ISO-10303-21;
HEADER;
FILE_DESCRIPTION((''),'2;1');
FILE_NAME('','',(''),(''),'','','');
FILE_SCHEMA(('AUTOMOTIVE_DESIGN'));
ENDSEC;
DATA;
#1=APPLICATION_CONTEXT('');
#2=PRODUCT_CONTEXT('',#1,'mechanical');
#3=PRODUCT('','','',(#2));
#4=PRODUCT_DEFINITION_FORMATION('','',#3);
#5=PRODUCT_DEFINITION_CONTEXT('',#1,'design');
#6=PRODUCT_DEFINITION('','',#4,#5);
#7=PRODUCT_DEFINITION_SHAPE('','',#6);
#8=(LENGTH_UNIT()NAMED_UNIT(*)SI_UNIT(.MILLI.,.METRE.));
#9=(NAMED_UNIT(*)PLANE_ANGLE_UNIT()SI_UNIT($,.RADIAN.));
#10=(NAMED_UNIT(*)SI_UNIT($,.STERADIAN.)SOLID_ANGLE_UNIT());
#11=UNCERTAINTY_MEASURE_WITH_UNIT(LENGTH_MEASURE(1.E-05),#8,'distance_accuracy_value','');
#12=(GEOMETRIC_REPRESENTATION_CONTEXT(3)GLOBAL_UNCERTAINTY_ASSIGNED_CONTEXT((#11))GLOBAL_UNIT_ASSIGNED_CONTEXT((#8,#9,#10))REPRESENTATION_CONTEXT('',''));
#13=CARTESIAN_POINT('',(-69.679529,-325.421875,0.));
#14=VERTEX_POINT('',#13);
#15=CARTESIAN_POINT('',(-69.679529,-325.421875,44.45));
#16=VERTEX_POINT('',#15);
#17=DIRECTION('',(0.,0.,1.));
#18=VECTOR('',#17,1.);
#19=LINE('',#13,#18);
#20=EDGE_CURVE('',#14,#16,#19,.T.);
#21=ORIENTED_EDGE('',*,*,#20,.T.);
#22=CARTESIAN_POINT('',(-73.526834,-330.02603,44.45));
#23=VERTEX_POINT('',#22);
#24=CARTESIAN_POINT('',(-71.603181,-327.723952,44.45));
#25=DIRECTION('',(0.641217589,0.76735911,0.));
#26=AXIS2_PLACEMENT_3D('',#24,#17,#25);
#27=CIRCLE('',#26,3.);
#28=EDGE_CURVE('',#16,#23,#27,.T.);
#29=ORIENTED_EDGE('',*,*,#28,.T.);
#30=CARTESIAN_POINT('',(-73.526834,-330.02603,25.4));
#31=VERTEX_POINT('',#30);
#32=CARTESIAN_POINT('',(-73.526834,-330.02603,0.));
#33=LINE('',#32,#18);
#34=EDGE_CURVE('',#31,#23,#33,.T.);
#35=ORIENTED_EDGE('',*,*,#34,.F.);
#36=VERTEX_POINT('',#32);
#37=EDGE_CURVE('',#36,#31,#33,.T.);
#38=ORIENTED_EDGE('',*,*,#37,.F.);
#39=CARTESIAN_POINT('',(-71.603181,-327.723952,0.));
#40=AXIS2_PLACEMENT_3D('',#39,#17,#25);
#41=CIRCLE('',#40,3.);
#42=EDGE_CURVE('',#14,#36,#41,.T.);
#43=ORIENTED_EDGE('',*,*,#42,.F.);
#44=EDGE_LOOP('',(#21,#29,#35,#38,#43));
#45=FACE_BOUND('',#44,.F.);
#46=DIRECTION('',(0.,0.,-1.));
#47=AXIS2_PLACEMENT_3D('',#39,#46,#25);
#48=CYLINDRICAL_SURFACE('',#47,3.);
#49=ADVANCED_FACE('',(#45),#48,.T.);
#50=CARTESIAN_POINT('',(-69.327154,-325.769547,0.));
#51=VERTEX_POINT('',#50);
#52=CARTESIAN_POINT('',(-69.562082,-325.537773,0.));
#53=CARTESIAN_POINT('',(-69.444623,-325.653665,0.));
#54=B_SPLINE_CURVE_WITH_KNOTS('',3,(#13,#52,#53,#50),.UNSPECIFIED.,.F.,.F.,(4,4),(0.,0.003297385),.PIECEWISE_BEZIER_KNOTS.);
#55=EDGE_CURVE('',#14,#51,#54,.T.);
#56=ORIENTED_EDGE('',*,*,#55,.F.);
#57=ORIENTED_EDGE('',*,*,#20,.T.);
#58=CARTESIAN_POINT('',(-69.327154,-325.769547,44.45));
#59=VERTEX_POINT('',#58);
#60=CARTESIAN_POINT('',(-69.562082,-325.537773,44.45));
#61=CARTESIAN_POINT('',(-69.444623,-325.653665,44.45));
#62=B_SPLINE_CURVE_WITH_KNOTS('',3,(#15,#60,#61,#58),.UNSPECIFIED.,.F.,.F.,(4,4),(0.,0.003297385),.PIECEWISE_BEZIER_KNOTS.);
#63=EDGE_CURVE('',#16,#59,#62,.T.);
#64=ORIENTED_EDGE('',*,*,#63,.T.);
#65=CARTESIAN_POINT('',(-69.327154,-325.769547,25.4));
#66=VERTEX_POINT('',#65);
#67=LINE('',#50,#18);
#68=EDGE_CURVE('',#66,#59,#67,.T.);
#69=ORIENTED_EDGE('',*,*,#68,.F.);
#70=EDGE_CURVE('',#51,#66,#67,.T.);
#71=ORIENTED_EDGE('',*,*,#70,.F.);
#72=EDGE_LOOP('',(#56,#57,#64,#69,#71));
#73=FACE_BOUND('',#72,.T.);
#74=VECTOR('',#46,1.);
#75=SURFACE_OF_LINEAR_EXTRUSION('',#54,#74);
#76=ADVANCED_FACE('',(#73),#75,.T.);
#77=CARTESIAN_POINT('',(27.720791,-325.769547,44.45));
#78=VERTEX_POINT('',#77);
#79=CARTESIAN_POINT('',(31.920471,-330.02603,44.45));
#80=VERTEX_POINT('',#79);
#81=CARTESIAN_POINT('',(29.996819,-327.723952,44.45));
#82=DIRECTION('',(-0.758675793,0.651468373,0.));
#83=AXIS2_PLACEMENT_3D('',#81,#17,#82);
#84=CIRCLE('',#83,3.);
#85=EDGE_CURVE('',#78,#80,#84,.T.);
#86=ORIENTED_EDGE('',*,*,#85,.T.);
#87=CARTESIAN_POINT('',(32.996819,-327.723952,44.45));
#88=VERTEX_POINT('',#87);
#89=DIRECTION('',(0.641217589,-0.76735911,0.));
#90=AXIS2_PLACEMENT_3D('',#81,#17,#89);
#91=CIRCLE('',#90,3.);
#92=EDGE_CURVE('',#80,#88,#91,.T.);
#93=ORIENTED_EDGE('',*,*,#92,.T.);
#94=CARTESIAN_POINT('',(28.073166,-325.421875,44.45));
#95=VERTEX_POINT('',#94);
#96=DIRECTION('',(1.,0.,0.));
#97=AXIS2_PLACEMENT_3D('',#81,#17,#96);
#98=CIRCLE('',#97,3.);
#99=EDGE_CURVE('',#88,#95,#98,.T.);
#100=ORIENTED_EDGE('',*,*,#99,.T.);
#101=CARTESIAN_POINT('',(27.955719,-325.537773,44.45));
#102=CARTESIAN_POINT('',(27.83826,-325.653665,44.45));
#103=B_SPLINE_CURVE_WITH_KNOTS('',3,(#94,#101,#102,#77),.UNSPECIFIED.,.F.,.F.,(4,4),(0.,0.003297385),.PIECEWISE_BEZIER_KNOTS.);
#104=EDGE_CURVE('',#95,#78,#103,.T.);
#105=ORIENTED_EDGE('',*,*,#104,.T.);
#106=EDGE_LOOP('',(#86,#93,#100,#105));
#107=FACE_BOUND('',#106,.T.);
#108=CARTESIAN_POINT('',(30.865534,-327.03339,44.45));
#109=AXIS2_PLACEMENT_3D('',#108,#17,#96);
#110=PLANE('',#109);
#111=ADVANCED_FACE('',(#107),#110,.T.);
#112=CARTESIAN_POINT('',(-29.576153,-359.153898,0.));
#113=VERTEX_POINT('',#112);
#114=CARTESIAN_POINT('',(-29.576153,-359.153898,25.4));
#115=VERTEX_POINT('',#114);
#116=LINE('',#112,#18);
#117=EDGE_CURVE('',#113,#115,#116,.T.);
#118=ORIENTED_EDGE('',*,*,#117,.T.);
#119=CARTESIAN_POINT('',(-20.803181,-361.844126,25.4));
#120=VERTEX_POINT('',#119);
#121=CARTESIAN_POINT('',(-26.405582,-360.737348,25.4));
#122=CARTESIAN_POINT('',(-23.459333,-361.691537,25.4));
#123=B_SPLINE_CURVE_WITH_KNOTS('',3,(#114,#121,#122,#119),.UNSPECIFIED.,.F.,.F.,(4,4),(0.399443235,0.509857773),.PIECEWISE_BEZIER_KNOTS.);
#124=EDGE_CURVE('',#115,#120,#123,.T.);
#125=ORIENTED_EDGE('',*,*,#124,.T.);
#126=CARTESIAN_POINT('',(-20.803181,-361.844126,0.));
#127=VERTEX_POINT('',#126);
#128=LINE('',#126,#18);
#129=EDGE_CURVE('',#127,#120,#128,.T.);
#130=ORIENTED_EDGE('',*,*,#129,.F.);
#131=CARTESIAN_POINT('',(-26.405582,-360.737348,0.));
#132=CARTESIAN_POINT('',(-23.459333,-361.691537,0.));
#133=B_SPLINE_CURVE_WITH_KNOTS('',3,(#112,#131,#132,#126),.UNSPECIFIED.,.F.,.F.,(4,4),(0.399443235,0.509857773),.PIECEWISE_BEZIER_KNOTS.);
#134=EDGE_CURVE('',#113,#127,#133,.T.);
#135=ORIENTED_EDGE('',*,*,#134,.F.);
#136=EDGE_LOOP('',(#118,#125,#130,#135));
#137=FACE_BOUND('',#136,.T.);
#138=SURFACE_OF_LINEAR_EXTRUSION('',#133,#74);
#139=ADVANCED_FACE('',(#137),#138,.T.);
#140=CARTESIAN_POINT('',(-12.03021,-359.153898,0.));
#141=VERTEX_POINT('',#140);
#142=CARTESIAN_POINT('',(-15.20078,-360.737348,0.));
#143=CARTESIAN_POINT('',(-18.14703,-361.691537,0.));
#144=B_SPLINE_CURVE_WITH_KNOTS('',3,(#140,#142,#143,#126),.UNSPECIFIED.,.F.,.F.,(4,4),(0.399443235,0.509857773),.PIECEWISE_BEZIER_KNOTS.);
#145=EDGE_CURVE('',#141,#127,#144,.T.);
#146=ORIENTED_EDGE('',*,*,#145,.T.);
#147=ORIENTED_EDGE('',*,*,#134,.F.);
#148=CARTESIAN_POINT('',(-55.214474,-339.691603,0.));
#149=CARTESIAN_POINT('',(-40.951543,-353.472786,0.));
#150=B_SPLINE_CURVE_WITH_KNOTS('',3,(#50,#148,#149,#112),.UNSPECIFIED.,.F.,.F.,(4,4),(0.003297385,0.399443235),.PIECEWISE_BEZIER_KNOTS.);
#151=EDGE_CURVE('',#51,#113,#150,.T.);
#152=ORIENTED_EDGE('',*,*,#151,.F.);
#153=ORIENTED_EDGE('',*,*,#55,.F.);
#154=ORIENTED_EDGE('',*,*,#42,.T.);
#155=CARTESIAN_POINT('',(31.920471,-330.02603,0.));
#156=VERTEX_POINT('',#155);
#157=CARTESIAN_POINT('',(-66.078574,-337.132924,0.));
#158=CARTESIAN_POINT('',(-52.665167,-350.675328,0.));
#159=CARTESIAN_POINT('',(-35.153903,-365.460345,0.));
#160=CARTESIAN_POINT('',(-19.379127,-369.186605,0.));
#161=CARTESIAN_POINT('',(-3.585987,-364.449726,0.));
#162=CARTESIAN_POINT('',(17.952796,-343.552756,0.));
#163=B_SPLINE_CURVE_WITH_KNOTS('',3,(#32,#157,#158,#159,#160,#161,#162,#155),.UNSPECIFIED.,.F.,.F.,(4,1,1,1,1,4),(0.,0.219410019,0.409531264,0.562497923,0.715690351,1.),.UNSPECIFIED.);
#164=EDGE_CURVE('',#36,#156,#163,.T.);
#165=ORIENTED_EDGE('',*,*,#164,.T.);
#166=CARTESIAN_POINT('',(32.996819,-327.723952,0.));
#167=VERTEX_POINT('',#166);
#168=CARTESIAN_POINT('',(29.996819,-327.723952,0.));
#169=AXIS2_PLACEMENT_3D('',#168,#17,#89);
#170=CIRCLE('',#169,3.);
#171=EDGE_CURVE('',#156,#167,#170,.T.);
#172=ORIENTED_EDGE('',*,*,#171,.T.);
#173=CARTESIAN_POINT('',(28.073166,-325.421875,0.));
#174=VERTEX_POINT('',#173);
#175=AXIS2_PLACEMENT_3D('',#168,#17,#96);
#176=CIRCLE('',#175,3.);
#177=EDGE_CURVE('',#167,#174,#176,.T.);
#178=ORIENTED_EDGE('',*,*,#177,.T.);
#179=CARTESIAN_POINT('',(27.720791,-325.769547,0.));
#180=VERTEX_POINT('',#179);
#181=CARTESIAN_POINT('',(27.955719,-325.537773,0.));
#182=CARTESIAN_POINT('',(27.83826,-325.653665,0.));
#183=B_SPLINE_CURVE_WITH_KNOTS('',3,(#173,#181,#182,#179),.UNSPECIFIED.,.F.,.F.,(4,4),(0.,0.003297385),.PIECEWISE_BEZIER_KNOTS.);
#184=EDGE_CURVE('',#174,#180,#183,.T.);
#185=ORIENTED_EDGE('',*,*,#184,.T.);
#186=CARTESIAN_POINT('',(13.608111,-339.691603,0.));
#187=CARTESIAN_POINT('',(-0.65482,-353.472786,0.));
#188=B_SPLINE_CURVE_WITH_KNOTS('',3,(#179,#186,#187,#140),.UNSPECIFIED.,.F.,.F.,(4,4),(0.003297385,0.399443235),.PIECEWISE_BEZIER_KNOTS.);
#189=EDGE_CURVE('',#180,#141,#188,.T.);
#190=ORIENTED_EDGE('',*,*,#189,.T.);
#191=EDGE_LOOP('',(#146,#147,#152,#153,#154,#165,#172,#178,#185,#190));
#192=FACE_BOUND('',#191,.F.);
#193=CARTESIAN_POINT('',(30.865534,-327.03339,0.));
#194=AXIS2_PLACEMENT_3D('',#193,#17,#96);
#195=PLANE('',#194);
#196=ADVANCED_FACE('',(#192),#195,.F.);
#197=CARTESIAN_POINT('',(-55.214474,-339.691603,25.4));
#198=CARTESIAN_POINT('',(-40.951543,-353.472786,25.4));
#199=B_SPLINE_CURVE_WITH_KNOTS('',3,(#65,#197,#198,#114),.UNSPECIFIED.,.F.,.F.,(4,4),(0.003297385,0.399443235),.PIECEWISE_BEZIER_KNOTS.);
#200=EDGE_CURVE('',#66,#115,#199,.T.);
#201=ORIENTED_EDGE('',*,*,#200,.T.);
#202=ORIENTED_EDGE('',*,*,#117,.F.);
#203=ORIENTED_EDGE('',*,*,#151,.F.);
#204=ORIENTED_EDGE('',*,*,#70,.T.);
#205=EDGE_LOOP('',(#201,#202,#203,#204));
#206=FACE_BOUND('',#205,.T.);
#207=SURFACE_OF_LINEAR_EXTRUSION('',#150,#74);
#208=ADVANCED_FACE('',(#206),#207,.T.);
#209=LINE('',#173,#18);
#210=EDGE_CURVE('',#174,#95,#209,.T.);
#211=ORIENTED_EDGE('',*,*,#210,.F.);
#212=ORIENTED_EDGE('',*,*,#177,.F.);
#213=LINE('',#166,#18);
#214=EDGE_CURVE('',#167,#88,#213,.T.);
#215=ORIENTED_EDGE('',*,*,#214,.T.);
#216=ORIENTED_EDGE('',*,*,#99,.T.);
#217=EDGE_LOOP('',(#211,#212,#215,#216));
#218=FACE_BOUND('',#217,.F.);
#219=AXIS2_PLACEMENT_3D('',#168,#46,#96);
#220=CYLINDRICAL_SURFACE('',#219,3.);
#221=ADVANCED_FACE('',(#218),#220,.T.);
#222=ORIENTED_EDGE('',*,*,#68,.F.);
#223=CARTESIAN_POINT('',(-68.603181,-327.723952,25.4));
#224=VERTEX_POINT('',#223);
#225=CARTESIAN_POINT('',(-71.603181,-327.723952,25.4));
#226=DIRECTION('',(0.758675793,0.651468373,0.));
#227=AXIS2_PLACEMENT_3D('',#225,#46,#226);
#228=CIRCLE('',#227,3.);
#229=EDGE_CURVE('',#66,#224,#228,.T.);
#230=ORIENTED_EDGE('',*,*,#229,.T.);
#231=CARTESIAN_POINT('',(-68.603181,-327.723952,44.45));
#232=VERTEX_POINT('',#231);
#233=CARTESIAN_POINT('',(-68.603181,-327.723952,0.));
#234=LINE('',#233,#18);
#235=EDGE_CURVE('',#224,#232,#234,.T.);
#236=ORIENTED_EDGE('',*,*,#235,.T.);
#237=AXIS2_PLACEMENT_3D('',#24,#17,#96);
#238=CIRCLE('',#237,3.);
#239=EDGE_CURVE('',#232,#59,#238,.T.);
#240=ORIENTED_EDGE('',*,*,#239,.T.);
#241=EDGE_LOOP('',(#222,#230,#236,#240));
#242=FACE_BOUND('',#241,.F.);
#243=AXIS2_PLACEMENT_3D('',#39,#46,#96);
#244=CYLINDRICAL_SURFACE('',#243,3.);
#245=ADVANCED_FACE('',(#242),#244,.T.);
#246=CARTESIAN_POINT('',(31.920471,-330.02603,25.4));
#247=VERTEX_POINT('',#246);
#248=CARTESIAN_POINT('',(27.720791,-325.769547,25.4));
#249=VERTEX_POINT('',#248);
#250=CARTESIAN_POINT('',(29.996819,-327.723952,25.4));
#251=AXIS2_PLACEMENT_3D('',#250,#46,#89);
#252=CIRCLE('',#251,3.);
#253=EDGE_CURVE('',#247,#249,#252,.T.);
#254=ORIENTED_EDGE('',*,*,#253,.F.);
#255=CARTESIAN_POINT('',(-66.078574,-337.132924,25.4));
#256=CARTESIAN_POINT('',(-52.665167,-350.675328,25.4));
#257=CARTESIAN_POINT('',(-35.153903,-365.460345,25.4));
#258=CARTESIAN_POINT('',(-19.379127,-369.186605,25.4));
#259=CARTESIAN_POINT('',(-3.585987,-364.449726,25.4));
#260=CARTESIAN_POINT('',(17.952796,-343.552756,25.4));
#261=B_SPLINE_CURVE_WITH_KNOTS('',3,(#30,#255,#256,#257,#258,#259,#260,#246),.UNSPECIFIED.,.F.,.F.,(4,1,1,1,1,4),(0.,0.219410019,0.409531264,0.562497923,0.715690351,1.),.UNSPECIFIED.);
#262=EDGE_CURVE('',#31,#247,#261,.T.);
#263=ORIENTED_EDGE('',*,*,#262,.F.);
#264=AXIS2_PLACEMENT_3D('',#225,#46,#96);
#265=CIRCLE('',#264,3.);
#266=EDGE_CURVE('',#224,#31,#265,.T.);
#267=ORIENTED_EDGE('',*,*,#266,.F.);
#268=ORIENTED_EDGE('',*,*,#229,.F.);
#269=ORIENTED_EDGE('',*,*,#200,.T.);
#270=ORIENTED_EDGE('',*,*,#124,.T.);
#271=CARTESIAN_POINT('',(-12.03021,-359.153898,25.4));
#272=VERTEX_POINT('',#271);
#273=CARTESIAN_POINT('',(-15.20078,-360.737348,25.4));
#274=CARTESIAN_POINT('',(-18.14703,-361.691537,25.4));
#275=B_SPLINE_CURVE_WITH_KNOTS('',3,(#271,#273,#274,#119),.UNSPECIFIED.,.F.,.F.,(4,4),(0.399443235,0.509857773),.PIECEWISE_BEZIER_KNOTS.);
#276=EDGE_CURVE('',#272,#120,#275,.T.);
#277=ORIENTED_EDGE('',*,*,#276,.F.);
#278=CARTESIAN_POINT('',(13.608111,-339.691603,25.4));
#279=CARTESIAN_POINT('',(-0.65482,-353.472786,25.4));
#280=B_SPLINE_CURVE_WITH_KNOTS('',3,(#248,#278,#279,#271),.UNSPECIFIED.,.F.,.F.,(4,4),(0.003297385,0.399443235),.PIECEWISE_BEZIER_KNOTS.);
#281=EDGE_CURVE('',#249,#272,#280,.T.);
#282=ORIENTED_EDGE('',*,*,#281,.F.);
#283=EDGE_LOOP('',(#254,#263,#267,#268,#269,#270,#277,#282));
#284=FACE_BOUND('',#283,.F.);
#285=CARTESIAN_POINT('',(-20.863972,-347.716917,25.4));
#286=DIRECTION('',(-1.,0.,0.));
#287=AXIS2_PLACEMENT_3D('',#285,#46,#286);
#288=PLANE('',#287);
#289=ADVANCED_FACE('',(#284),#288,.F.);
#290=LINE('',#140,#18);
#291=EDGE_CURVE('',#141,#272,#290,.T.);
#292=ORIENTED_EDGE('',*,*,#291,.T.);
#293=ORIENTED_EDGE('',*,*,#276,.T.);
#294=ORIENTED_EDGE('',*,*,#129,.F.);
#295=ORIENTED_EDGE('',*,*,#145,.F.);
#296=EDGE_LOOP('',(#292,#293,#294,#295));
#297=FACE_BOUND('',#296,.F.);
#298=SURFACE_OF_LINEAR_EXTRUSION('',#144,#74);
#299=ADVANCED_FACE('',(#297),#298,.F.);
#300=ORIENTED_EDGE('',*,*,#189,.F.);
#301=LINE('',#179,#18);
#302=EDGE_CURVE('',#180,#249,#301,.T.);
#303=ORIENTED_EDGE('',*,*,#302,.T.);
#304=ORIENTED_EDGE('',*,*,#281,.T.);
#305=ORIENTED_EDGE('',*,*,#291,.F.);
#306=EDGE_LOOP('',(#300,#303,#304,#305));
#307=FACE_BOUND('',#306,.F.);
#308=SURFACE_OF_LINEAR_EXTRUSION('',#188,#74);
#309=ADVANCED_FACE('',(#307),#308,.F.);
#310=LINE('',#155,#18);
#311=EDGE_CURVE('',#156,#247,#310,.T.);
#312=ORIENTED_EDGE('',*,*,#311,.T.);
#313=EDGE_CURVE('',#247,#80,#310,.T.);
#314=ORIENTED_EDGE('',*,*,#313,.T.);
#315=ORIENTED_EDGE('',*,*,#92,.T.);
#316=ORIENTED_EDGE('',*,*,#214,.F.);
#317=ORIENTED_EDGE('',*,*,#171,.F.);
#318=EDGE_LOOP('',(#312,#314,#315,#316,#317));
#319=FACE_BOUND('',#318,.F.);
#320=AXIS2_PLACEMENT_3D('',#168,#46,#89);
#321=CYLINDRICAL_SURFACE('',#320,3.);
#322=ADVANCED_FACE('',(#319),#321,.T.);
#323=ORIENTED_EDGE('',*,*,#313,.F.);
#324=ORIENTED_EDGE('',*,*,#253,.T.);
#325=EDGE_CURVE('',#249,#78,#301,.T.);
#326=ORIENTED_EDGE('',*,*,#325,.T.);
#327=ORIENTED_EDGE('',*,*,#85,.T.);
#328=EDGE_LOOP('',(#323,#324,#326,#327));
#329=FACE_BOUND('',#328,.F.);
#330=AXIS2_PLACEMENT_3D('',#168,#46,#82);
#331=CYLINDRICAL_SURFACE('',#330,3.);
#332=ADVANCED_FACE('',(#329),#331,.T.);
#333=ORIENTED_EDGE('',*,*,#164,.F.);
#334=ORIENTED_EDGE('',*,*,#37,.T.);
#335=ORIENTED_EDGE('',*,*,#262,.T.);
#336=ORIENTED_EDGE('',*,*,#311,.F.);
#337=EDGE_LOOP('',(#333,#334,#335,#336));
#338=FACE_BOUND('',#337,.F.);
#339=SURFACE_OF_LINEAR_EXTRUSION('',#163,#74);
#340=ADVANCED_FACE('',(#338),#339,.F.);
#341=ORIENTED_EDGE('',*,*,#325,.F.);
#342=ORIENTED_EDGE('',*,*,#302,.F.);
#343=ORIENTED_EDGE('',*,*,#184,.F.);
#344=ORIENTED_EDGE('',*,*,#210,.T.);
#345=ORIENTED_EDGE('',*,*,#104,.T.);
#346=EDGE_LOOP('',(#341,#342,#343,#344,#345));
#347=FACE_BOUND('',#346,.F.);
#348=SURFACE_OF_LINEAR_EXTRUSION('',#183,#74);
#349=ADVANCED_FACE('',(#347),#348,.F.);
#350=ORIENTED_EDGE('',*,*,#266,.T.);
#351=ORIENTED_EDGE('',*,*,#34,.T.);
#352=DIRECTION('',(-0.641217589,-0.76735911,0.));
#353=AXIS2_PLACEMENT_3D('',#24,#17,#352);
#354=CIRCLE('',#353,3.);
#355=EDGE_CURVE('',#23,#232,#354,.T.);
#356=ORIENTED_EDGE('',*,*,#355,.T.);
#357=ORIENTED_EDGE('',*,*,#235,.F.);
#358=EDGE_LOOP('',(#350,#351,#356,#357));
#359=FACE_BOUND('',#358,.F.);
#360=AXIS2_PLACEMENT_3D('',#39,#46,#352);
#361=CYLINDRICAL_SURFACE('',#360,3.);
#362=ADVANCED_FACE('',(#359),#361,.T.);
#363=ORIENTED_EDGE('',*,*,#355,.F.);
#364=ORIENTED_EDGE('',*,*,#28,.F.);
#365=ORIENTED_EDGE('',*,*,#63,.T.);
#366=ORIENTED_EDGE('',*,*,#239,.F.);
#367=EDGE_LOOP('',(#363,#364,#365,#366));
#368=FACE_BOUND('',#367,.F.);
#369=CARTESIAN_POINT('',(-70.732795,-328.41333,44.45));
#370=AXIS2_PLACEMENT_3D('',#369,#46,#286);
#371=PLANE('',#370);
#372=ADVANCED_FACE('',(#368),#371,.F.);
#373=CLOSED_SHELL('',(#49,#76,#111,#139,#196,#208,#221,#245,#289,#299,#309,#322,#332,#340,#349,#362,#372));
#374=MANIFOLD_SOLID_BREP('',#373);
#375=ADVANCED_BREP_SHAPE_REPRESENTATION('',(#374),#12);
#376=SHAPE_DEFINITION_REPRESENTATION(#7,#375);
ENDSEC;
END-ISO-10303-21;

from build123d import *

# Parameters (mm, degrees)
F1_DEPTH = 25.4
F2_DEPTH = 44.45


with BuildPart() as f1:
    # F0 (on Top) → F1 (new body)
    with BuildSketch(Plane.XY):
        with BuildLine():
            add(Edge.make_bspline(
                [(-69.3271539599, -325.7695472874), (-55.2144738249, -339.6916032797), (-40.9515430368, -353.4727855932), (-29.5761530725, -359.1538975577)],
                knots=[0.0032973847, 0.0032973847, 0.0032973847, 0.0032973847, 0.3994432353, 0.3994432353, 0.3994432353, 0.3994432353], degree=3))
            ThreePointArc((-69.3271539599, -325.7695472874), (-68.78999079, -326.6818588732), (-68.6031813399, -327.7239524054))
            ThreePointArc((-68.6031813399, -327.7239524054), (-70.3325433699, -330.4415762111), (-73.526834106, -330.0260297359))
            add(Edge.make_bspline(
                [(-73.526834106, -330.0260297359), (-66.0785739485, -337.1329239072), (-52.6651672252, -350.675327591), (-35.1539032994, -365.4603452904), (-19.3791270617, -369.1866054653), (-3.5859872539, -364.4497262422), (17.9527958908, -343.5527557441), (31.9204714261, -330.0260297359)],
                knots=[0, 0, 0, 0, 0.2194100194, 0.4095312642, 0.5624979229, 0.7156903508, 1, 1, 1, 1], degree=3))
            ThreePointArc((31.9204714261, -330.0260297359), (27.8612970199, -329.8309757381), (27.72079128, -325.7695472874))
            add(Edge.make_bspline(
                [(27.72079128, -325.7695472874), (13.608111145, -339.6916032798), (-0.6548196431, -353.4727855932), (-12.0302096074, -359.1538975577)],
                knots=[0.0032973847, 0.0032973847, 0.0032973847, 0.0032973847, 0.3994432353, 0.3994432353, 0.3994432353, 0.3994432353], degree=3))
            add(Edge.make_bspline(
                [(-20.8031813399, -361.8441262888), (-20.6461461246, -361.8531475586), (-17.281131215, -361.9872858015), (-14.3941104944, -360.8015328656), (-12.0302096074, -359.1538975577)],
                knots=[0.5098577732, 0.5098577732, 0.5098577732, 0.5098577732, 0.5163856275, 0.6506484057, 0.6506484057, 0.6506484057, 0.6506484057], degree=3))
            add(Edge.make_bspline(
                [(-20.8031813399, -361.8441262888), (-20.9602165553, -361.8531475586), (-24.3252314649, -361.9872858015), (-27.2122521855, -360.8015328656), (-29.5761530725, -359.1538975577)],
                knots=[0.5098577732, 0.5098577732, 0.5098577732, 0.5098577732, 0.5163856275, 0.6506484057, 0.6506484057, 0.6506484057, 0.6506484057], degree=3))
        make_face()
        with BuildLine():
            add(Edge.make_bspline(
                [(-29.5761530725, -359.1538975577), (-26.4055823726, -360.7373480762), (-23.4593329293, -361.6915372024), (-20.8031813399, -361.8441262888)],
                knots=[0.3994432353, 0.3994432353, 0.3994432353, 0.3994432353, 0.5098577732, 0.5098577732, 0.5098577732, 0.5098577732], degree=3))
            add(Edge.make_bspline(
                [(-20.8031813399, -361.8441262888), (-20.9602165553, -361.8531475586), (-24.3252314649, -361.9872858015), (-27.2122521855, -360.8015328656), (-29.5761530725, -359.1538975577)],
                knots=[0.5098577732, 0.5098577732, 0.5098577732, 0.5098577732, 0.5163856275, 0.6506484057, 0.6506484057, 0.6506484057, 0.6506484057], degree=3))
        make_face()
        with BuildLine():
            add(Edge.make_bspline(
                [(-12.0302096074, -359.1538975577), (-15.2007803073, -360.7373480762), (-18.1470297506, -361.6915372024), (-20.8031813399, -361.8441262888)],
                knots=[0.3994432353, 0.3994432353, 0.3994432353, 0.3994432353, 0.5098577732, 0.5098577732, 0.5098577732, 0.5098577732], degree=3))
            add(Edge.make_bspline(
                [(-20.8031813399, -361.8441262888), (-20.6461461246, -361.8531475586), (-17.281131215, -361.9872858015), (-14.3941104944, -360.8015328656), (-12.0302096074, -359.1538975577)],
                knots=[0.5098577732, 0.5098577732, 0.5098577732, 0.5098577732, 0.5163856275, 0.6506484057, 0.6506484057, 0.6506484057, 0.6506484057], degree=3))
        make_face()
    extrude(amount=F1_DEPTH)

    # F0 (on Top) → F2 (join)
    with BuildSketch(Plane.XY):
        with BuildLine():
            Line((28.073165894, -325.4218750749), (31.9204714261, -330.0260297359))
            ThreePointArc((31.9204714261, -330.0260297359), (32.7144424657, -328.9945903755), (32.9968186601, -327.7239524054))
            ThreePointArc((32.9968186601, -327.7239524054), (31.2674566301, -325.0063285998), (28.073165894, -325.4218750749))
        make_face()
        with BuildLine():
            ThreePointArc((27.72079128, -325.7695472874), (27.8612970199, -329.8309757381), (31.9204714261, -330.0260297359))
            Line((31.9204714261, -330.0260297359), (28.073165894, -325.4218750749))
            add(Edge.make_bspline(
                [(28.073165894, -325.4218750749), (27.9557192671, -325.5377725126), (27.8382604785, -325.6536647801), (27.72079128, -325.7695472874)],
                knots=[0, 0, 0, 0, 0.0032973847, 0.0032973847, 0.0032973847, 0.0032973847], degree=3))
        make_face()
        with BuildLine():
            add(Edge.make_bspline(
                [(-69.6795285739, -325.4218750749), (-69.562081947, -325.5377725126), (-69.4446231584, -325.6536647801), (-69.3271539599, -325.7695472874)],
                knots=[0, 0, 0, 0, 0.0032973847, 0.0032973847, 0.0032973847, 0.0032973847], degree=3))
            Line((-69.6795285739, -325.4218750749), (-73.526834106, -330.0260297359))
            ThreePointArc((-73.526834106, -330.0260297359), (-70.3325433699, -330.4415762111), (-68.6031813399, -327.7239524054))
            ThreePointArc((-68.6031813399, -327.7239524054), (-68.78999079, -326.6818588732), (-69.3271539599, -325.7695472874))
        make_face()
        with BuildLine():
            Line((-73.526834106, -330.0260297359), (-69.6795285739, -325.4218750749))
            ThreePointArc((-69.6795285739, -325.4218750749), (-73.9052586704, -325.8002996394), (-73.526834106, -330.0260297359))
        make_face()
    extrude(amount=F2_DEPTH)


solid = f1.part
